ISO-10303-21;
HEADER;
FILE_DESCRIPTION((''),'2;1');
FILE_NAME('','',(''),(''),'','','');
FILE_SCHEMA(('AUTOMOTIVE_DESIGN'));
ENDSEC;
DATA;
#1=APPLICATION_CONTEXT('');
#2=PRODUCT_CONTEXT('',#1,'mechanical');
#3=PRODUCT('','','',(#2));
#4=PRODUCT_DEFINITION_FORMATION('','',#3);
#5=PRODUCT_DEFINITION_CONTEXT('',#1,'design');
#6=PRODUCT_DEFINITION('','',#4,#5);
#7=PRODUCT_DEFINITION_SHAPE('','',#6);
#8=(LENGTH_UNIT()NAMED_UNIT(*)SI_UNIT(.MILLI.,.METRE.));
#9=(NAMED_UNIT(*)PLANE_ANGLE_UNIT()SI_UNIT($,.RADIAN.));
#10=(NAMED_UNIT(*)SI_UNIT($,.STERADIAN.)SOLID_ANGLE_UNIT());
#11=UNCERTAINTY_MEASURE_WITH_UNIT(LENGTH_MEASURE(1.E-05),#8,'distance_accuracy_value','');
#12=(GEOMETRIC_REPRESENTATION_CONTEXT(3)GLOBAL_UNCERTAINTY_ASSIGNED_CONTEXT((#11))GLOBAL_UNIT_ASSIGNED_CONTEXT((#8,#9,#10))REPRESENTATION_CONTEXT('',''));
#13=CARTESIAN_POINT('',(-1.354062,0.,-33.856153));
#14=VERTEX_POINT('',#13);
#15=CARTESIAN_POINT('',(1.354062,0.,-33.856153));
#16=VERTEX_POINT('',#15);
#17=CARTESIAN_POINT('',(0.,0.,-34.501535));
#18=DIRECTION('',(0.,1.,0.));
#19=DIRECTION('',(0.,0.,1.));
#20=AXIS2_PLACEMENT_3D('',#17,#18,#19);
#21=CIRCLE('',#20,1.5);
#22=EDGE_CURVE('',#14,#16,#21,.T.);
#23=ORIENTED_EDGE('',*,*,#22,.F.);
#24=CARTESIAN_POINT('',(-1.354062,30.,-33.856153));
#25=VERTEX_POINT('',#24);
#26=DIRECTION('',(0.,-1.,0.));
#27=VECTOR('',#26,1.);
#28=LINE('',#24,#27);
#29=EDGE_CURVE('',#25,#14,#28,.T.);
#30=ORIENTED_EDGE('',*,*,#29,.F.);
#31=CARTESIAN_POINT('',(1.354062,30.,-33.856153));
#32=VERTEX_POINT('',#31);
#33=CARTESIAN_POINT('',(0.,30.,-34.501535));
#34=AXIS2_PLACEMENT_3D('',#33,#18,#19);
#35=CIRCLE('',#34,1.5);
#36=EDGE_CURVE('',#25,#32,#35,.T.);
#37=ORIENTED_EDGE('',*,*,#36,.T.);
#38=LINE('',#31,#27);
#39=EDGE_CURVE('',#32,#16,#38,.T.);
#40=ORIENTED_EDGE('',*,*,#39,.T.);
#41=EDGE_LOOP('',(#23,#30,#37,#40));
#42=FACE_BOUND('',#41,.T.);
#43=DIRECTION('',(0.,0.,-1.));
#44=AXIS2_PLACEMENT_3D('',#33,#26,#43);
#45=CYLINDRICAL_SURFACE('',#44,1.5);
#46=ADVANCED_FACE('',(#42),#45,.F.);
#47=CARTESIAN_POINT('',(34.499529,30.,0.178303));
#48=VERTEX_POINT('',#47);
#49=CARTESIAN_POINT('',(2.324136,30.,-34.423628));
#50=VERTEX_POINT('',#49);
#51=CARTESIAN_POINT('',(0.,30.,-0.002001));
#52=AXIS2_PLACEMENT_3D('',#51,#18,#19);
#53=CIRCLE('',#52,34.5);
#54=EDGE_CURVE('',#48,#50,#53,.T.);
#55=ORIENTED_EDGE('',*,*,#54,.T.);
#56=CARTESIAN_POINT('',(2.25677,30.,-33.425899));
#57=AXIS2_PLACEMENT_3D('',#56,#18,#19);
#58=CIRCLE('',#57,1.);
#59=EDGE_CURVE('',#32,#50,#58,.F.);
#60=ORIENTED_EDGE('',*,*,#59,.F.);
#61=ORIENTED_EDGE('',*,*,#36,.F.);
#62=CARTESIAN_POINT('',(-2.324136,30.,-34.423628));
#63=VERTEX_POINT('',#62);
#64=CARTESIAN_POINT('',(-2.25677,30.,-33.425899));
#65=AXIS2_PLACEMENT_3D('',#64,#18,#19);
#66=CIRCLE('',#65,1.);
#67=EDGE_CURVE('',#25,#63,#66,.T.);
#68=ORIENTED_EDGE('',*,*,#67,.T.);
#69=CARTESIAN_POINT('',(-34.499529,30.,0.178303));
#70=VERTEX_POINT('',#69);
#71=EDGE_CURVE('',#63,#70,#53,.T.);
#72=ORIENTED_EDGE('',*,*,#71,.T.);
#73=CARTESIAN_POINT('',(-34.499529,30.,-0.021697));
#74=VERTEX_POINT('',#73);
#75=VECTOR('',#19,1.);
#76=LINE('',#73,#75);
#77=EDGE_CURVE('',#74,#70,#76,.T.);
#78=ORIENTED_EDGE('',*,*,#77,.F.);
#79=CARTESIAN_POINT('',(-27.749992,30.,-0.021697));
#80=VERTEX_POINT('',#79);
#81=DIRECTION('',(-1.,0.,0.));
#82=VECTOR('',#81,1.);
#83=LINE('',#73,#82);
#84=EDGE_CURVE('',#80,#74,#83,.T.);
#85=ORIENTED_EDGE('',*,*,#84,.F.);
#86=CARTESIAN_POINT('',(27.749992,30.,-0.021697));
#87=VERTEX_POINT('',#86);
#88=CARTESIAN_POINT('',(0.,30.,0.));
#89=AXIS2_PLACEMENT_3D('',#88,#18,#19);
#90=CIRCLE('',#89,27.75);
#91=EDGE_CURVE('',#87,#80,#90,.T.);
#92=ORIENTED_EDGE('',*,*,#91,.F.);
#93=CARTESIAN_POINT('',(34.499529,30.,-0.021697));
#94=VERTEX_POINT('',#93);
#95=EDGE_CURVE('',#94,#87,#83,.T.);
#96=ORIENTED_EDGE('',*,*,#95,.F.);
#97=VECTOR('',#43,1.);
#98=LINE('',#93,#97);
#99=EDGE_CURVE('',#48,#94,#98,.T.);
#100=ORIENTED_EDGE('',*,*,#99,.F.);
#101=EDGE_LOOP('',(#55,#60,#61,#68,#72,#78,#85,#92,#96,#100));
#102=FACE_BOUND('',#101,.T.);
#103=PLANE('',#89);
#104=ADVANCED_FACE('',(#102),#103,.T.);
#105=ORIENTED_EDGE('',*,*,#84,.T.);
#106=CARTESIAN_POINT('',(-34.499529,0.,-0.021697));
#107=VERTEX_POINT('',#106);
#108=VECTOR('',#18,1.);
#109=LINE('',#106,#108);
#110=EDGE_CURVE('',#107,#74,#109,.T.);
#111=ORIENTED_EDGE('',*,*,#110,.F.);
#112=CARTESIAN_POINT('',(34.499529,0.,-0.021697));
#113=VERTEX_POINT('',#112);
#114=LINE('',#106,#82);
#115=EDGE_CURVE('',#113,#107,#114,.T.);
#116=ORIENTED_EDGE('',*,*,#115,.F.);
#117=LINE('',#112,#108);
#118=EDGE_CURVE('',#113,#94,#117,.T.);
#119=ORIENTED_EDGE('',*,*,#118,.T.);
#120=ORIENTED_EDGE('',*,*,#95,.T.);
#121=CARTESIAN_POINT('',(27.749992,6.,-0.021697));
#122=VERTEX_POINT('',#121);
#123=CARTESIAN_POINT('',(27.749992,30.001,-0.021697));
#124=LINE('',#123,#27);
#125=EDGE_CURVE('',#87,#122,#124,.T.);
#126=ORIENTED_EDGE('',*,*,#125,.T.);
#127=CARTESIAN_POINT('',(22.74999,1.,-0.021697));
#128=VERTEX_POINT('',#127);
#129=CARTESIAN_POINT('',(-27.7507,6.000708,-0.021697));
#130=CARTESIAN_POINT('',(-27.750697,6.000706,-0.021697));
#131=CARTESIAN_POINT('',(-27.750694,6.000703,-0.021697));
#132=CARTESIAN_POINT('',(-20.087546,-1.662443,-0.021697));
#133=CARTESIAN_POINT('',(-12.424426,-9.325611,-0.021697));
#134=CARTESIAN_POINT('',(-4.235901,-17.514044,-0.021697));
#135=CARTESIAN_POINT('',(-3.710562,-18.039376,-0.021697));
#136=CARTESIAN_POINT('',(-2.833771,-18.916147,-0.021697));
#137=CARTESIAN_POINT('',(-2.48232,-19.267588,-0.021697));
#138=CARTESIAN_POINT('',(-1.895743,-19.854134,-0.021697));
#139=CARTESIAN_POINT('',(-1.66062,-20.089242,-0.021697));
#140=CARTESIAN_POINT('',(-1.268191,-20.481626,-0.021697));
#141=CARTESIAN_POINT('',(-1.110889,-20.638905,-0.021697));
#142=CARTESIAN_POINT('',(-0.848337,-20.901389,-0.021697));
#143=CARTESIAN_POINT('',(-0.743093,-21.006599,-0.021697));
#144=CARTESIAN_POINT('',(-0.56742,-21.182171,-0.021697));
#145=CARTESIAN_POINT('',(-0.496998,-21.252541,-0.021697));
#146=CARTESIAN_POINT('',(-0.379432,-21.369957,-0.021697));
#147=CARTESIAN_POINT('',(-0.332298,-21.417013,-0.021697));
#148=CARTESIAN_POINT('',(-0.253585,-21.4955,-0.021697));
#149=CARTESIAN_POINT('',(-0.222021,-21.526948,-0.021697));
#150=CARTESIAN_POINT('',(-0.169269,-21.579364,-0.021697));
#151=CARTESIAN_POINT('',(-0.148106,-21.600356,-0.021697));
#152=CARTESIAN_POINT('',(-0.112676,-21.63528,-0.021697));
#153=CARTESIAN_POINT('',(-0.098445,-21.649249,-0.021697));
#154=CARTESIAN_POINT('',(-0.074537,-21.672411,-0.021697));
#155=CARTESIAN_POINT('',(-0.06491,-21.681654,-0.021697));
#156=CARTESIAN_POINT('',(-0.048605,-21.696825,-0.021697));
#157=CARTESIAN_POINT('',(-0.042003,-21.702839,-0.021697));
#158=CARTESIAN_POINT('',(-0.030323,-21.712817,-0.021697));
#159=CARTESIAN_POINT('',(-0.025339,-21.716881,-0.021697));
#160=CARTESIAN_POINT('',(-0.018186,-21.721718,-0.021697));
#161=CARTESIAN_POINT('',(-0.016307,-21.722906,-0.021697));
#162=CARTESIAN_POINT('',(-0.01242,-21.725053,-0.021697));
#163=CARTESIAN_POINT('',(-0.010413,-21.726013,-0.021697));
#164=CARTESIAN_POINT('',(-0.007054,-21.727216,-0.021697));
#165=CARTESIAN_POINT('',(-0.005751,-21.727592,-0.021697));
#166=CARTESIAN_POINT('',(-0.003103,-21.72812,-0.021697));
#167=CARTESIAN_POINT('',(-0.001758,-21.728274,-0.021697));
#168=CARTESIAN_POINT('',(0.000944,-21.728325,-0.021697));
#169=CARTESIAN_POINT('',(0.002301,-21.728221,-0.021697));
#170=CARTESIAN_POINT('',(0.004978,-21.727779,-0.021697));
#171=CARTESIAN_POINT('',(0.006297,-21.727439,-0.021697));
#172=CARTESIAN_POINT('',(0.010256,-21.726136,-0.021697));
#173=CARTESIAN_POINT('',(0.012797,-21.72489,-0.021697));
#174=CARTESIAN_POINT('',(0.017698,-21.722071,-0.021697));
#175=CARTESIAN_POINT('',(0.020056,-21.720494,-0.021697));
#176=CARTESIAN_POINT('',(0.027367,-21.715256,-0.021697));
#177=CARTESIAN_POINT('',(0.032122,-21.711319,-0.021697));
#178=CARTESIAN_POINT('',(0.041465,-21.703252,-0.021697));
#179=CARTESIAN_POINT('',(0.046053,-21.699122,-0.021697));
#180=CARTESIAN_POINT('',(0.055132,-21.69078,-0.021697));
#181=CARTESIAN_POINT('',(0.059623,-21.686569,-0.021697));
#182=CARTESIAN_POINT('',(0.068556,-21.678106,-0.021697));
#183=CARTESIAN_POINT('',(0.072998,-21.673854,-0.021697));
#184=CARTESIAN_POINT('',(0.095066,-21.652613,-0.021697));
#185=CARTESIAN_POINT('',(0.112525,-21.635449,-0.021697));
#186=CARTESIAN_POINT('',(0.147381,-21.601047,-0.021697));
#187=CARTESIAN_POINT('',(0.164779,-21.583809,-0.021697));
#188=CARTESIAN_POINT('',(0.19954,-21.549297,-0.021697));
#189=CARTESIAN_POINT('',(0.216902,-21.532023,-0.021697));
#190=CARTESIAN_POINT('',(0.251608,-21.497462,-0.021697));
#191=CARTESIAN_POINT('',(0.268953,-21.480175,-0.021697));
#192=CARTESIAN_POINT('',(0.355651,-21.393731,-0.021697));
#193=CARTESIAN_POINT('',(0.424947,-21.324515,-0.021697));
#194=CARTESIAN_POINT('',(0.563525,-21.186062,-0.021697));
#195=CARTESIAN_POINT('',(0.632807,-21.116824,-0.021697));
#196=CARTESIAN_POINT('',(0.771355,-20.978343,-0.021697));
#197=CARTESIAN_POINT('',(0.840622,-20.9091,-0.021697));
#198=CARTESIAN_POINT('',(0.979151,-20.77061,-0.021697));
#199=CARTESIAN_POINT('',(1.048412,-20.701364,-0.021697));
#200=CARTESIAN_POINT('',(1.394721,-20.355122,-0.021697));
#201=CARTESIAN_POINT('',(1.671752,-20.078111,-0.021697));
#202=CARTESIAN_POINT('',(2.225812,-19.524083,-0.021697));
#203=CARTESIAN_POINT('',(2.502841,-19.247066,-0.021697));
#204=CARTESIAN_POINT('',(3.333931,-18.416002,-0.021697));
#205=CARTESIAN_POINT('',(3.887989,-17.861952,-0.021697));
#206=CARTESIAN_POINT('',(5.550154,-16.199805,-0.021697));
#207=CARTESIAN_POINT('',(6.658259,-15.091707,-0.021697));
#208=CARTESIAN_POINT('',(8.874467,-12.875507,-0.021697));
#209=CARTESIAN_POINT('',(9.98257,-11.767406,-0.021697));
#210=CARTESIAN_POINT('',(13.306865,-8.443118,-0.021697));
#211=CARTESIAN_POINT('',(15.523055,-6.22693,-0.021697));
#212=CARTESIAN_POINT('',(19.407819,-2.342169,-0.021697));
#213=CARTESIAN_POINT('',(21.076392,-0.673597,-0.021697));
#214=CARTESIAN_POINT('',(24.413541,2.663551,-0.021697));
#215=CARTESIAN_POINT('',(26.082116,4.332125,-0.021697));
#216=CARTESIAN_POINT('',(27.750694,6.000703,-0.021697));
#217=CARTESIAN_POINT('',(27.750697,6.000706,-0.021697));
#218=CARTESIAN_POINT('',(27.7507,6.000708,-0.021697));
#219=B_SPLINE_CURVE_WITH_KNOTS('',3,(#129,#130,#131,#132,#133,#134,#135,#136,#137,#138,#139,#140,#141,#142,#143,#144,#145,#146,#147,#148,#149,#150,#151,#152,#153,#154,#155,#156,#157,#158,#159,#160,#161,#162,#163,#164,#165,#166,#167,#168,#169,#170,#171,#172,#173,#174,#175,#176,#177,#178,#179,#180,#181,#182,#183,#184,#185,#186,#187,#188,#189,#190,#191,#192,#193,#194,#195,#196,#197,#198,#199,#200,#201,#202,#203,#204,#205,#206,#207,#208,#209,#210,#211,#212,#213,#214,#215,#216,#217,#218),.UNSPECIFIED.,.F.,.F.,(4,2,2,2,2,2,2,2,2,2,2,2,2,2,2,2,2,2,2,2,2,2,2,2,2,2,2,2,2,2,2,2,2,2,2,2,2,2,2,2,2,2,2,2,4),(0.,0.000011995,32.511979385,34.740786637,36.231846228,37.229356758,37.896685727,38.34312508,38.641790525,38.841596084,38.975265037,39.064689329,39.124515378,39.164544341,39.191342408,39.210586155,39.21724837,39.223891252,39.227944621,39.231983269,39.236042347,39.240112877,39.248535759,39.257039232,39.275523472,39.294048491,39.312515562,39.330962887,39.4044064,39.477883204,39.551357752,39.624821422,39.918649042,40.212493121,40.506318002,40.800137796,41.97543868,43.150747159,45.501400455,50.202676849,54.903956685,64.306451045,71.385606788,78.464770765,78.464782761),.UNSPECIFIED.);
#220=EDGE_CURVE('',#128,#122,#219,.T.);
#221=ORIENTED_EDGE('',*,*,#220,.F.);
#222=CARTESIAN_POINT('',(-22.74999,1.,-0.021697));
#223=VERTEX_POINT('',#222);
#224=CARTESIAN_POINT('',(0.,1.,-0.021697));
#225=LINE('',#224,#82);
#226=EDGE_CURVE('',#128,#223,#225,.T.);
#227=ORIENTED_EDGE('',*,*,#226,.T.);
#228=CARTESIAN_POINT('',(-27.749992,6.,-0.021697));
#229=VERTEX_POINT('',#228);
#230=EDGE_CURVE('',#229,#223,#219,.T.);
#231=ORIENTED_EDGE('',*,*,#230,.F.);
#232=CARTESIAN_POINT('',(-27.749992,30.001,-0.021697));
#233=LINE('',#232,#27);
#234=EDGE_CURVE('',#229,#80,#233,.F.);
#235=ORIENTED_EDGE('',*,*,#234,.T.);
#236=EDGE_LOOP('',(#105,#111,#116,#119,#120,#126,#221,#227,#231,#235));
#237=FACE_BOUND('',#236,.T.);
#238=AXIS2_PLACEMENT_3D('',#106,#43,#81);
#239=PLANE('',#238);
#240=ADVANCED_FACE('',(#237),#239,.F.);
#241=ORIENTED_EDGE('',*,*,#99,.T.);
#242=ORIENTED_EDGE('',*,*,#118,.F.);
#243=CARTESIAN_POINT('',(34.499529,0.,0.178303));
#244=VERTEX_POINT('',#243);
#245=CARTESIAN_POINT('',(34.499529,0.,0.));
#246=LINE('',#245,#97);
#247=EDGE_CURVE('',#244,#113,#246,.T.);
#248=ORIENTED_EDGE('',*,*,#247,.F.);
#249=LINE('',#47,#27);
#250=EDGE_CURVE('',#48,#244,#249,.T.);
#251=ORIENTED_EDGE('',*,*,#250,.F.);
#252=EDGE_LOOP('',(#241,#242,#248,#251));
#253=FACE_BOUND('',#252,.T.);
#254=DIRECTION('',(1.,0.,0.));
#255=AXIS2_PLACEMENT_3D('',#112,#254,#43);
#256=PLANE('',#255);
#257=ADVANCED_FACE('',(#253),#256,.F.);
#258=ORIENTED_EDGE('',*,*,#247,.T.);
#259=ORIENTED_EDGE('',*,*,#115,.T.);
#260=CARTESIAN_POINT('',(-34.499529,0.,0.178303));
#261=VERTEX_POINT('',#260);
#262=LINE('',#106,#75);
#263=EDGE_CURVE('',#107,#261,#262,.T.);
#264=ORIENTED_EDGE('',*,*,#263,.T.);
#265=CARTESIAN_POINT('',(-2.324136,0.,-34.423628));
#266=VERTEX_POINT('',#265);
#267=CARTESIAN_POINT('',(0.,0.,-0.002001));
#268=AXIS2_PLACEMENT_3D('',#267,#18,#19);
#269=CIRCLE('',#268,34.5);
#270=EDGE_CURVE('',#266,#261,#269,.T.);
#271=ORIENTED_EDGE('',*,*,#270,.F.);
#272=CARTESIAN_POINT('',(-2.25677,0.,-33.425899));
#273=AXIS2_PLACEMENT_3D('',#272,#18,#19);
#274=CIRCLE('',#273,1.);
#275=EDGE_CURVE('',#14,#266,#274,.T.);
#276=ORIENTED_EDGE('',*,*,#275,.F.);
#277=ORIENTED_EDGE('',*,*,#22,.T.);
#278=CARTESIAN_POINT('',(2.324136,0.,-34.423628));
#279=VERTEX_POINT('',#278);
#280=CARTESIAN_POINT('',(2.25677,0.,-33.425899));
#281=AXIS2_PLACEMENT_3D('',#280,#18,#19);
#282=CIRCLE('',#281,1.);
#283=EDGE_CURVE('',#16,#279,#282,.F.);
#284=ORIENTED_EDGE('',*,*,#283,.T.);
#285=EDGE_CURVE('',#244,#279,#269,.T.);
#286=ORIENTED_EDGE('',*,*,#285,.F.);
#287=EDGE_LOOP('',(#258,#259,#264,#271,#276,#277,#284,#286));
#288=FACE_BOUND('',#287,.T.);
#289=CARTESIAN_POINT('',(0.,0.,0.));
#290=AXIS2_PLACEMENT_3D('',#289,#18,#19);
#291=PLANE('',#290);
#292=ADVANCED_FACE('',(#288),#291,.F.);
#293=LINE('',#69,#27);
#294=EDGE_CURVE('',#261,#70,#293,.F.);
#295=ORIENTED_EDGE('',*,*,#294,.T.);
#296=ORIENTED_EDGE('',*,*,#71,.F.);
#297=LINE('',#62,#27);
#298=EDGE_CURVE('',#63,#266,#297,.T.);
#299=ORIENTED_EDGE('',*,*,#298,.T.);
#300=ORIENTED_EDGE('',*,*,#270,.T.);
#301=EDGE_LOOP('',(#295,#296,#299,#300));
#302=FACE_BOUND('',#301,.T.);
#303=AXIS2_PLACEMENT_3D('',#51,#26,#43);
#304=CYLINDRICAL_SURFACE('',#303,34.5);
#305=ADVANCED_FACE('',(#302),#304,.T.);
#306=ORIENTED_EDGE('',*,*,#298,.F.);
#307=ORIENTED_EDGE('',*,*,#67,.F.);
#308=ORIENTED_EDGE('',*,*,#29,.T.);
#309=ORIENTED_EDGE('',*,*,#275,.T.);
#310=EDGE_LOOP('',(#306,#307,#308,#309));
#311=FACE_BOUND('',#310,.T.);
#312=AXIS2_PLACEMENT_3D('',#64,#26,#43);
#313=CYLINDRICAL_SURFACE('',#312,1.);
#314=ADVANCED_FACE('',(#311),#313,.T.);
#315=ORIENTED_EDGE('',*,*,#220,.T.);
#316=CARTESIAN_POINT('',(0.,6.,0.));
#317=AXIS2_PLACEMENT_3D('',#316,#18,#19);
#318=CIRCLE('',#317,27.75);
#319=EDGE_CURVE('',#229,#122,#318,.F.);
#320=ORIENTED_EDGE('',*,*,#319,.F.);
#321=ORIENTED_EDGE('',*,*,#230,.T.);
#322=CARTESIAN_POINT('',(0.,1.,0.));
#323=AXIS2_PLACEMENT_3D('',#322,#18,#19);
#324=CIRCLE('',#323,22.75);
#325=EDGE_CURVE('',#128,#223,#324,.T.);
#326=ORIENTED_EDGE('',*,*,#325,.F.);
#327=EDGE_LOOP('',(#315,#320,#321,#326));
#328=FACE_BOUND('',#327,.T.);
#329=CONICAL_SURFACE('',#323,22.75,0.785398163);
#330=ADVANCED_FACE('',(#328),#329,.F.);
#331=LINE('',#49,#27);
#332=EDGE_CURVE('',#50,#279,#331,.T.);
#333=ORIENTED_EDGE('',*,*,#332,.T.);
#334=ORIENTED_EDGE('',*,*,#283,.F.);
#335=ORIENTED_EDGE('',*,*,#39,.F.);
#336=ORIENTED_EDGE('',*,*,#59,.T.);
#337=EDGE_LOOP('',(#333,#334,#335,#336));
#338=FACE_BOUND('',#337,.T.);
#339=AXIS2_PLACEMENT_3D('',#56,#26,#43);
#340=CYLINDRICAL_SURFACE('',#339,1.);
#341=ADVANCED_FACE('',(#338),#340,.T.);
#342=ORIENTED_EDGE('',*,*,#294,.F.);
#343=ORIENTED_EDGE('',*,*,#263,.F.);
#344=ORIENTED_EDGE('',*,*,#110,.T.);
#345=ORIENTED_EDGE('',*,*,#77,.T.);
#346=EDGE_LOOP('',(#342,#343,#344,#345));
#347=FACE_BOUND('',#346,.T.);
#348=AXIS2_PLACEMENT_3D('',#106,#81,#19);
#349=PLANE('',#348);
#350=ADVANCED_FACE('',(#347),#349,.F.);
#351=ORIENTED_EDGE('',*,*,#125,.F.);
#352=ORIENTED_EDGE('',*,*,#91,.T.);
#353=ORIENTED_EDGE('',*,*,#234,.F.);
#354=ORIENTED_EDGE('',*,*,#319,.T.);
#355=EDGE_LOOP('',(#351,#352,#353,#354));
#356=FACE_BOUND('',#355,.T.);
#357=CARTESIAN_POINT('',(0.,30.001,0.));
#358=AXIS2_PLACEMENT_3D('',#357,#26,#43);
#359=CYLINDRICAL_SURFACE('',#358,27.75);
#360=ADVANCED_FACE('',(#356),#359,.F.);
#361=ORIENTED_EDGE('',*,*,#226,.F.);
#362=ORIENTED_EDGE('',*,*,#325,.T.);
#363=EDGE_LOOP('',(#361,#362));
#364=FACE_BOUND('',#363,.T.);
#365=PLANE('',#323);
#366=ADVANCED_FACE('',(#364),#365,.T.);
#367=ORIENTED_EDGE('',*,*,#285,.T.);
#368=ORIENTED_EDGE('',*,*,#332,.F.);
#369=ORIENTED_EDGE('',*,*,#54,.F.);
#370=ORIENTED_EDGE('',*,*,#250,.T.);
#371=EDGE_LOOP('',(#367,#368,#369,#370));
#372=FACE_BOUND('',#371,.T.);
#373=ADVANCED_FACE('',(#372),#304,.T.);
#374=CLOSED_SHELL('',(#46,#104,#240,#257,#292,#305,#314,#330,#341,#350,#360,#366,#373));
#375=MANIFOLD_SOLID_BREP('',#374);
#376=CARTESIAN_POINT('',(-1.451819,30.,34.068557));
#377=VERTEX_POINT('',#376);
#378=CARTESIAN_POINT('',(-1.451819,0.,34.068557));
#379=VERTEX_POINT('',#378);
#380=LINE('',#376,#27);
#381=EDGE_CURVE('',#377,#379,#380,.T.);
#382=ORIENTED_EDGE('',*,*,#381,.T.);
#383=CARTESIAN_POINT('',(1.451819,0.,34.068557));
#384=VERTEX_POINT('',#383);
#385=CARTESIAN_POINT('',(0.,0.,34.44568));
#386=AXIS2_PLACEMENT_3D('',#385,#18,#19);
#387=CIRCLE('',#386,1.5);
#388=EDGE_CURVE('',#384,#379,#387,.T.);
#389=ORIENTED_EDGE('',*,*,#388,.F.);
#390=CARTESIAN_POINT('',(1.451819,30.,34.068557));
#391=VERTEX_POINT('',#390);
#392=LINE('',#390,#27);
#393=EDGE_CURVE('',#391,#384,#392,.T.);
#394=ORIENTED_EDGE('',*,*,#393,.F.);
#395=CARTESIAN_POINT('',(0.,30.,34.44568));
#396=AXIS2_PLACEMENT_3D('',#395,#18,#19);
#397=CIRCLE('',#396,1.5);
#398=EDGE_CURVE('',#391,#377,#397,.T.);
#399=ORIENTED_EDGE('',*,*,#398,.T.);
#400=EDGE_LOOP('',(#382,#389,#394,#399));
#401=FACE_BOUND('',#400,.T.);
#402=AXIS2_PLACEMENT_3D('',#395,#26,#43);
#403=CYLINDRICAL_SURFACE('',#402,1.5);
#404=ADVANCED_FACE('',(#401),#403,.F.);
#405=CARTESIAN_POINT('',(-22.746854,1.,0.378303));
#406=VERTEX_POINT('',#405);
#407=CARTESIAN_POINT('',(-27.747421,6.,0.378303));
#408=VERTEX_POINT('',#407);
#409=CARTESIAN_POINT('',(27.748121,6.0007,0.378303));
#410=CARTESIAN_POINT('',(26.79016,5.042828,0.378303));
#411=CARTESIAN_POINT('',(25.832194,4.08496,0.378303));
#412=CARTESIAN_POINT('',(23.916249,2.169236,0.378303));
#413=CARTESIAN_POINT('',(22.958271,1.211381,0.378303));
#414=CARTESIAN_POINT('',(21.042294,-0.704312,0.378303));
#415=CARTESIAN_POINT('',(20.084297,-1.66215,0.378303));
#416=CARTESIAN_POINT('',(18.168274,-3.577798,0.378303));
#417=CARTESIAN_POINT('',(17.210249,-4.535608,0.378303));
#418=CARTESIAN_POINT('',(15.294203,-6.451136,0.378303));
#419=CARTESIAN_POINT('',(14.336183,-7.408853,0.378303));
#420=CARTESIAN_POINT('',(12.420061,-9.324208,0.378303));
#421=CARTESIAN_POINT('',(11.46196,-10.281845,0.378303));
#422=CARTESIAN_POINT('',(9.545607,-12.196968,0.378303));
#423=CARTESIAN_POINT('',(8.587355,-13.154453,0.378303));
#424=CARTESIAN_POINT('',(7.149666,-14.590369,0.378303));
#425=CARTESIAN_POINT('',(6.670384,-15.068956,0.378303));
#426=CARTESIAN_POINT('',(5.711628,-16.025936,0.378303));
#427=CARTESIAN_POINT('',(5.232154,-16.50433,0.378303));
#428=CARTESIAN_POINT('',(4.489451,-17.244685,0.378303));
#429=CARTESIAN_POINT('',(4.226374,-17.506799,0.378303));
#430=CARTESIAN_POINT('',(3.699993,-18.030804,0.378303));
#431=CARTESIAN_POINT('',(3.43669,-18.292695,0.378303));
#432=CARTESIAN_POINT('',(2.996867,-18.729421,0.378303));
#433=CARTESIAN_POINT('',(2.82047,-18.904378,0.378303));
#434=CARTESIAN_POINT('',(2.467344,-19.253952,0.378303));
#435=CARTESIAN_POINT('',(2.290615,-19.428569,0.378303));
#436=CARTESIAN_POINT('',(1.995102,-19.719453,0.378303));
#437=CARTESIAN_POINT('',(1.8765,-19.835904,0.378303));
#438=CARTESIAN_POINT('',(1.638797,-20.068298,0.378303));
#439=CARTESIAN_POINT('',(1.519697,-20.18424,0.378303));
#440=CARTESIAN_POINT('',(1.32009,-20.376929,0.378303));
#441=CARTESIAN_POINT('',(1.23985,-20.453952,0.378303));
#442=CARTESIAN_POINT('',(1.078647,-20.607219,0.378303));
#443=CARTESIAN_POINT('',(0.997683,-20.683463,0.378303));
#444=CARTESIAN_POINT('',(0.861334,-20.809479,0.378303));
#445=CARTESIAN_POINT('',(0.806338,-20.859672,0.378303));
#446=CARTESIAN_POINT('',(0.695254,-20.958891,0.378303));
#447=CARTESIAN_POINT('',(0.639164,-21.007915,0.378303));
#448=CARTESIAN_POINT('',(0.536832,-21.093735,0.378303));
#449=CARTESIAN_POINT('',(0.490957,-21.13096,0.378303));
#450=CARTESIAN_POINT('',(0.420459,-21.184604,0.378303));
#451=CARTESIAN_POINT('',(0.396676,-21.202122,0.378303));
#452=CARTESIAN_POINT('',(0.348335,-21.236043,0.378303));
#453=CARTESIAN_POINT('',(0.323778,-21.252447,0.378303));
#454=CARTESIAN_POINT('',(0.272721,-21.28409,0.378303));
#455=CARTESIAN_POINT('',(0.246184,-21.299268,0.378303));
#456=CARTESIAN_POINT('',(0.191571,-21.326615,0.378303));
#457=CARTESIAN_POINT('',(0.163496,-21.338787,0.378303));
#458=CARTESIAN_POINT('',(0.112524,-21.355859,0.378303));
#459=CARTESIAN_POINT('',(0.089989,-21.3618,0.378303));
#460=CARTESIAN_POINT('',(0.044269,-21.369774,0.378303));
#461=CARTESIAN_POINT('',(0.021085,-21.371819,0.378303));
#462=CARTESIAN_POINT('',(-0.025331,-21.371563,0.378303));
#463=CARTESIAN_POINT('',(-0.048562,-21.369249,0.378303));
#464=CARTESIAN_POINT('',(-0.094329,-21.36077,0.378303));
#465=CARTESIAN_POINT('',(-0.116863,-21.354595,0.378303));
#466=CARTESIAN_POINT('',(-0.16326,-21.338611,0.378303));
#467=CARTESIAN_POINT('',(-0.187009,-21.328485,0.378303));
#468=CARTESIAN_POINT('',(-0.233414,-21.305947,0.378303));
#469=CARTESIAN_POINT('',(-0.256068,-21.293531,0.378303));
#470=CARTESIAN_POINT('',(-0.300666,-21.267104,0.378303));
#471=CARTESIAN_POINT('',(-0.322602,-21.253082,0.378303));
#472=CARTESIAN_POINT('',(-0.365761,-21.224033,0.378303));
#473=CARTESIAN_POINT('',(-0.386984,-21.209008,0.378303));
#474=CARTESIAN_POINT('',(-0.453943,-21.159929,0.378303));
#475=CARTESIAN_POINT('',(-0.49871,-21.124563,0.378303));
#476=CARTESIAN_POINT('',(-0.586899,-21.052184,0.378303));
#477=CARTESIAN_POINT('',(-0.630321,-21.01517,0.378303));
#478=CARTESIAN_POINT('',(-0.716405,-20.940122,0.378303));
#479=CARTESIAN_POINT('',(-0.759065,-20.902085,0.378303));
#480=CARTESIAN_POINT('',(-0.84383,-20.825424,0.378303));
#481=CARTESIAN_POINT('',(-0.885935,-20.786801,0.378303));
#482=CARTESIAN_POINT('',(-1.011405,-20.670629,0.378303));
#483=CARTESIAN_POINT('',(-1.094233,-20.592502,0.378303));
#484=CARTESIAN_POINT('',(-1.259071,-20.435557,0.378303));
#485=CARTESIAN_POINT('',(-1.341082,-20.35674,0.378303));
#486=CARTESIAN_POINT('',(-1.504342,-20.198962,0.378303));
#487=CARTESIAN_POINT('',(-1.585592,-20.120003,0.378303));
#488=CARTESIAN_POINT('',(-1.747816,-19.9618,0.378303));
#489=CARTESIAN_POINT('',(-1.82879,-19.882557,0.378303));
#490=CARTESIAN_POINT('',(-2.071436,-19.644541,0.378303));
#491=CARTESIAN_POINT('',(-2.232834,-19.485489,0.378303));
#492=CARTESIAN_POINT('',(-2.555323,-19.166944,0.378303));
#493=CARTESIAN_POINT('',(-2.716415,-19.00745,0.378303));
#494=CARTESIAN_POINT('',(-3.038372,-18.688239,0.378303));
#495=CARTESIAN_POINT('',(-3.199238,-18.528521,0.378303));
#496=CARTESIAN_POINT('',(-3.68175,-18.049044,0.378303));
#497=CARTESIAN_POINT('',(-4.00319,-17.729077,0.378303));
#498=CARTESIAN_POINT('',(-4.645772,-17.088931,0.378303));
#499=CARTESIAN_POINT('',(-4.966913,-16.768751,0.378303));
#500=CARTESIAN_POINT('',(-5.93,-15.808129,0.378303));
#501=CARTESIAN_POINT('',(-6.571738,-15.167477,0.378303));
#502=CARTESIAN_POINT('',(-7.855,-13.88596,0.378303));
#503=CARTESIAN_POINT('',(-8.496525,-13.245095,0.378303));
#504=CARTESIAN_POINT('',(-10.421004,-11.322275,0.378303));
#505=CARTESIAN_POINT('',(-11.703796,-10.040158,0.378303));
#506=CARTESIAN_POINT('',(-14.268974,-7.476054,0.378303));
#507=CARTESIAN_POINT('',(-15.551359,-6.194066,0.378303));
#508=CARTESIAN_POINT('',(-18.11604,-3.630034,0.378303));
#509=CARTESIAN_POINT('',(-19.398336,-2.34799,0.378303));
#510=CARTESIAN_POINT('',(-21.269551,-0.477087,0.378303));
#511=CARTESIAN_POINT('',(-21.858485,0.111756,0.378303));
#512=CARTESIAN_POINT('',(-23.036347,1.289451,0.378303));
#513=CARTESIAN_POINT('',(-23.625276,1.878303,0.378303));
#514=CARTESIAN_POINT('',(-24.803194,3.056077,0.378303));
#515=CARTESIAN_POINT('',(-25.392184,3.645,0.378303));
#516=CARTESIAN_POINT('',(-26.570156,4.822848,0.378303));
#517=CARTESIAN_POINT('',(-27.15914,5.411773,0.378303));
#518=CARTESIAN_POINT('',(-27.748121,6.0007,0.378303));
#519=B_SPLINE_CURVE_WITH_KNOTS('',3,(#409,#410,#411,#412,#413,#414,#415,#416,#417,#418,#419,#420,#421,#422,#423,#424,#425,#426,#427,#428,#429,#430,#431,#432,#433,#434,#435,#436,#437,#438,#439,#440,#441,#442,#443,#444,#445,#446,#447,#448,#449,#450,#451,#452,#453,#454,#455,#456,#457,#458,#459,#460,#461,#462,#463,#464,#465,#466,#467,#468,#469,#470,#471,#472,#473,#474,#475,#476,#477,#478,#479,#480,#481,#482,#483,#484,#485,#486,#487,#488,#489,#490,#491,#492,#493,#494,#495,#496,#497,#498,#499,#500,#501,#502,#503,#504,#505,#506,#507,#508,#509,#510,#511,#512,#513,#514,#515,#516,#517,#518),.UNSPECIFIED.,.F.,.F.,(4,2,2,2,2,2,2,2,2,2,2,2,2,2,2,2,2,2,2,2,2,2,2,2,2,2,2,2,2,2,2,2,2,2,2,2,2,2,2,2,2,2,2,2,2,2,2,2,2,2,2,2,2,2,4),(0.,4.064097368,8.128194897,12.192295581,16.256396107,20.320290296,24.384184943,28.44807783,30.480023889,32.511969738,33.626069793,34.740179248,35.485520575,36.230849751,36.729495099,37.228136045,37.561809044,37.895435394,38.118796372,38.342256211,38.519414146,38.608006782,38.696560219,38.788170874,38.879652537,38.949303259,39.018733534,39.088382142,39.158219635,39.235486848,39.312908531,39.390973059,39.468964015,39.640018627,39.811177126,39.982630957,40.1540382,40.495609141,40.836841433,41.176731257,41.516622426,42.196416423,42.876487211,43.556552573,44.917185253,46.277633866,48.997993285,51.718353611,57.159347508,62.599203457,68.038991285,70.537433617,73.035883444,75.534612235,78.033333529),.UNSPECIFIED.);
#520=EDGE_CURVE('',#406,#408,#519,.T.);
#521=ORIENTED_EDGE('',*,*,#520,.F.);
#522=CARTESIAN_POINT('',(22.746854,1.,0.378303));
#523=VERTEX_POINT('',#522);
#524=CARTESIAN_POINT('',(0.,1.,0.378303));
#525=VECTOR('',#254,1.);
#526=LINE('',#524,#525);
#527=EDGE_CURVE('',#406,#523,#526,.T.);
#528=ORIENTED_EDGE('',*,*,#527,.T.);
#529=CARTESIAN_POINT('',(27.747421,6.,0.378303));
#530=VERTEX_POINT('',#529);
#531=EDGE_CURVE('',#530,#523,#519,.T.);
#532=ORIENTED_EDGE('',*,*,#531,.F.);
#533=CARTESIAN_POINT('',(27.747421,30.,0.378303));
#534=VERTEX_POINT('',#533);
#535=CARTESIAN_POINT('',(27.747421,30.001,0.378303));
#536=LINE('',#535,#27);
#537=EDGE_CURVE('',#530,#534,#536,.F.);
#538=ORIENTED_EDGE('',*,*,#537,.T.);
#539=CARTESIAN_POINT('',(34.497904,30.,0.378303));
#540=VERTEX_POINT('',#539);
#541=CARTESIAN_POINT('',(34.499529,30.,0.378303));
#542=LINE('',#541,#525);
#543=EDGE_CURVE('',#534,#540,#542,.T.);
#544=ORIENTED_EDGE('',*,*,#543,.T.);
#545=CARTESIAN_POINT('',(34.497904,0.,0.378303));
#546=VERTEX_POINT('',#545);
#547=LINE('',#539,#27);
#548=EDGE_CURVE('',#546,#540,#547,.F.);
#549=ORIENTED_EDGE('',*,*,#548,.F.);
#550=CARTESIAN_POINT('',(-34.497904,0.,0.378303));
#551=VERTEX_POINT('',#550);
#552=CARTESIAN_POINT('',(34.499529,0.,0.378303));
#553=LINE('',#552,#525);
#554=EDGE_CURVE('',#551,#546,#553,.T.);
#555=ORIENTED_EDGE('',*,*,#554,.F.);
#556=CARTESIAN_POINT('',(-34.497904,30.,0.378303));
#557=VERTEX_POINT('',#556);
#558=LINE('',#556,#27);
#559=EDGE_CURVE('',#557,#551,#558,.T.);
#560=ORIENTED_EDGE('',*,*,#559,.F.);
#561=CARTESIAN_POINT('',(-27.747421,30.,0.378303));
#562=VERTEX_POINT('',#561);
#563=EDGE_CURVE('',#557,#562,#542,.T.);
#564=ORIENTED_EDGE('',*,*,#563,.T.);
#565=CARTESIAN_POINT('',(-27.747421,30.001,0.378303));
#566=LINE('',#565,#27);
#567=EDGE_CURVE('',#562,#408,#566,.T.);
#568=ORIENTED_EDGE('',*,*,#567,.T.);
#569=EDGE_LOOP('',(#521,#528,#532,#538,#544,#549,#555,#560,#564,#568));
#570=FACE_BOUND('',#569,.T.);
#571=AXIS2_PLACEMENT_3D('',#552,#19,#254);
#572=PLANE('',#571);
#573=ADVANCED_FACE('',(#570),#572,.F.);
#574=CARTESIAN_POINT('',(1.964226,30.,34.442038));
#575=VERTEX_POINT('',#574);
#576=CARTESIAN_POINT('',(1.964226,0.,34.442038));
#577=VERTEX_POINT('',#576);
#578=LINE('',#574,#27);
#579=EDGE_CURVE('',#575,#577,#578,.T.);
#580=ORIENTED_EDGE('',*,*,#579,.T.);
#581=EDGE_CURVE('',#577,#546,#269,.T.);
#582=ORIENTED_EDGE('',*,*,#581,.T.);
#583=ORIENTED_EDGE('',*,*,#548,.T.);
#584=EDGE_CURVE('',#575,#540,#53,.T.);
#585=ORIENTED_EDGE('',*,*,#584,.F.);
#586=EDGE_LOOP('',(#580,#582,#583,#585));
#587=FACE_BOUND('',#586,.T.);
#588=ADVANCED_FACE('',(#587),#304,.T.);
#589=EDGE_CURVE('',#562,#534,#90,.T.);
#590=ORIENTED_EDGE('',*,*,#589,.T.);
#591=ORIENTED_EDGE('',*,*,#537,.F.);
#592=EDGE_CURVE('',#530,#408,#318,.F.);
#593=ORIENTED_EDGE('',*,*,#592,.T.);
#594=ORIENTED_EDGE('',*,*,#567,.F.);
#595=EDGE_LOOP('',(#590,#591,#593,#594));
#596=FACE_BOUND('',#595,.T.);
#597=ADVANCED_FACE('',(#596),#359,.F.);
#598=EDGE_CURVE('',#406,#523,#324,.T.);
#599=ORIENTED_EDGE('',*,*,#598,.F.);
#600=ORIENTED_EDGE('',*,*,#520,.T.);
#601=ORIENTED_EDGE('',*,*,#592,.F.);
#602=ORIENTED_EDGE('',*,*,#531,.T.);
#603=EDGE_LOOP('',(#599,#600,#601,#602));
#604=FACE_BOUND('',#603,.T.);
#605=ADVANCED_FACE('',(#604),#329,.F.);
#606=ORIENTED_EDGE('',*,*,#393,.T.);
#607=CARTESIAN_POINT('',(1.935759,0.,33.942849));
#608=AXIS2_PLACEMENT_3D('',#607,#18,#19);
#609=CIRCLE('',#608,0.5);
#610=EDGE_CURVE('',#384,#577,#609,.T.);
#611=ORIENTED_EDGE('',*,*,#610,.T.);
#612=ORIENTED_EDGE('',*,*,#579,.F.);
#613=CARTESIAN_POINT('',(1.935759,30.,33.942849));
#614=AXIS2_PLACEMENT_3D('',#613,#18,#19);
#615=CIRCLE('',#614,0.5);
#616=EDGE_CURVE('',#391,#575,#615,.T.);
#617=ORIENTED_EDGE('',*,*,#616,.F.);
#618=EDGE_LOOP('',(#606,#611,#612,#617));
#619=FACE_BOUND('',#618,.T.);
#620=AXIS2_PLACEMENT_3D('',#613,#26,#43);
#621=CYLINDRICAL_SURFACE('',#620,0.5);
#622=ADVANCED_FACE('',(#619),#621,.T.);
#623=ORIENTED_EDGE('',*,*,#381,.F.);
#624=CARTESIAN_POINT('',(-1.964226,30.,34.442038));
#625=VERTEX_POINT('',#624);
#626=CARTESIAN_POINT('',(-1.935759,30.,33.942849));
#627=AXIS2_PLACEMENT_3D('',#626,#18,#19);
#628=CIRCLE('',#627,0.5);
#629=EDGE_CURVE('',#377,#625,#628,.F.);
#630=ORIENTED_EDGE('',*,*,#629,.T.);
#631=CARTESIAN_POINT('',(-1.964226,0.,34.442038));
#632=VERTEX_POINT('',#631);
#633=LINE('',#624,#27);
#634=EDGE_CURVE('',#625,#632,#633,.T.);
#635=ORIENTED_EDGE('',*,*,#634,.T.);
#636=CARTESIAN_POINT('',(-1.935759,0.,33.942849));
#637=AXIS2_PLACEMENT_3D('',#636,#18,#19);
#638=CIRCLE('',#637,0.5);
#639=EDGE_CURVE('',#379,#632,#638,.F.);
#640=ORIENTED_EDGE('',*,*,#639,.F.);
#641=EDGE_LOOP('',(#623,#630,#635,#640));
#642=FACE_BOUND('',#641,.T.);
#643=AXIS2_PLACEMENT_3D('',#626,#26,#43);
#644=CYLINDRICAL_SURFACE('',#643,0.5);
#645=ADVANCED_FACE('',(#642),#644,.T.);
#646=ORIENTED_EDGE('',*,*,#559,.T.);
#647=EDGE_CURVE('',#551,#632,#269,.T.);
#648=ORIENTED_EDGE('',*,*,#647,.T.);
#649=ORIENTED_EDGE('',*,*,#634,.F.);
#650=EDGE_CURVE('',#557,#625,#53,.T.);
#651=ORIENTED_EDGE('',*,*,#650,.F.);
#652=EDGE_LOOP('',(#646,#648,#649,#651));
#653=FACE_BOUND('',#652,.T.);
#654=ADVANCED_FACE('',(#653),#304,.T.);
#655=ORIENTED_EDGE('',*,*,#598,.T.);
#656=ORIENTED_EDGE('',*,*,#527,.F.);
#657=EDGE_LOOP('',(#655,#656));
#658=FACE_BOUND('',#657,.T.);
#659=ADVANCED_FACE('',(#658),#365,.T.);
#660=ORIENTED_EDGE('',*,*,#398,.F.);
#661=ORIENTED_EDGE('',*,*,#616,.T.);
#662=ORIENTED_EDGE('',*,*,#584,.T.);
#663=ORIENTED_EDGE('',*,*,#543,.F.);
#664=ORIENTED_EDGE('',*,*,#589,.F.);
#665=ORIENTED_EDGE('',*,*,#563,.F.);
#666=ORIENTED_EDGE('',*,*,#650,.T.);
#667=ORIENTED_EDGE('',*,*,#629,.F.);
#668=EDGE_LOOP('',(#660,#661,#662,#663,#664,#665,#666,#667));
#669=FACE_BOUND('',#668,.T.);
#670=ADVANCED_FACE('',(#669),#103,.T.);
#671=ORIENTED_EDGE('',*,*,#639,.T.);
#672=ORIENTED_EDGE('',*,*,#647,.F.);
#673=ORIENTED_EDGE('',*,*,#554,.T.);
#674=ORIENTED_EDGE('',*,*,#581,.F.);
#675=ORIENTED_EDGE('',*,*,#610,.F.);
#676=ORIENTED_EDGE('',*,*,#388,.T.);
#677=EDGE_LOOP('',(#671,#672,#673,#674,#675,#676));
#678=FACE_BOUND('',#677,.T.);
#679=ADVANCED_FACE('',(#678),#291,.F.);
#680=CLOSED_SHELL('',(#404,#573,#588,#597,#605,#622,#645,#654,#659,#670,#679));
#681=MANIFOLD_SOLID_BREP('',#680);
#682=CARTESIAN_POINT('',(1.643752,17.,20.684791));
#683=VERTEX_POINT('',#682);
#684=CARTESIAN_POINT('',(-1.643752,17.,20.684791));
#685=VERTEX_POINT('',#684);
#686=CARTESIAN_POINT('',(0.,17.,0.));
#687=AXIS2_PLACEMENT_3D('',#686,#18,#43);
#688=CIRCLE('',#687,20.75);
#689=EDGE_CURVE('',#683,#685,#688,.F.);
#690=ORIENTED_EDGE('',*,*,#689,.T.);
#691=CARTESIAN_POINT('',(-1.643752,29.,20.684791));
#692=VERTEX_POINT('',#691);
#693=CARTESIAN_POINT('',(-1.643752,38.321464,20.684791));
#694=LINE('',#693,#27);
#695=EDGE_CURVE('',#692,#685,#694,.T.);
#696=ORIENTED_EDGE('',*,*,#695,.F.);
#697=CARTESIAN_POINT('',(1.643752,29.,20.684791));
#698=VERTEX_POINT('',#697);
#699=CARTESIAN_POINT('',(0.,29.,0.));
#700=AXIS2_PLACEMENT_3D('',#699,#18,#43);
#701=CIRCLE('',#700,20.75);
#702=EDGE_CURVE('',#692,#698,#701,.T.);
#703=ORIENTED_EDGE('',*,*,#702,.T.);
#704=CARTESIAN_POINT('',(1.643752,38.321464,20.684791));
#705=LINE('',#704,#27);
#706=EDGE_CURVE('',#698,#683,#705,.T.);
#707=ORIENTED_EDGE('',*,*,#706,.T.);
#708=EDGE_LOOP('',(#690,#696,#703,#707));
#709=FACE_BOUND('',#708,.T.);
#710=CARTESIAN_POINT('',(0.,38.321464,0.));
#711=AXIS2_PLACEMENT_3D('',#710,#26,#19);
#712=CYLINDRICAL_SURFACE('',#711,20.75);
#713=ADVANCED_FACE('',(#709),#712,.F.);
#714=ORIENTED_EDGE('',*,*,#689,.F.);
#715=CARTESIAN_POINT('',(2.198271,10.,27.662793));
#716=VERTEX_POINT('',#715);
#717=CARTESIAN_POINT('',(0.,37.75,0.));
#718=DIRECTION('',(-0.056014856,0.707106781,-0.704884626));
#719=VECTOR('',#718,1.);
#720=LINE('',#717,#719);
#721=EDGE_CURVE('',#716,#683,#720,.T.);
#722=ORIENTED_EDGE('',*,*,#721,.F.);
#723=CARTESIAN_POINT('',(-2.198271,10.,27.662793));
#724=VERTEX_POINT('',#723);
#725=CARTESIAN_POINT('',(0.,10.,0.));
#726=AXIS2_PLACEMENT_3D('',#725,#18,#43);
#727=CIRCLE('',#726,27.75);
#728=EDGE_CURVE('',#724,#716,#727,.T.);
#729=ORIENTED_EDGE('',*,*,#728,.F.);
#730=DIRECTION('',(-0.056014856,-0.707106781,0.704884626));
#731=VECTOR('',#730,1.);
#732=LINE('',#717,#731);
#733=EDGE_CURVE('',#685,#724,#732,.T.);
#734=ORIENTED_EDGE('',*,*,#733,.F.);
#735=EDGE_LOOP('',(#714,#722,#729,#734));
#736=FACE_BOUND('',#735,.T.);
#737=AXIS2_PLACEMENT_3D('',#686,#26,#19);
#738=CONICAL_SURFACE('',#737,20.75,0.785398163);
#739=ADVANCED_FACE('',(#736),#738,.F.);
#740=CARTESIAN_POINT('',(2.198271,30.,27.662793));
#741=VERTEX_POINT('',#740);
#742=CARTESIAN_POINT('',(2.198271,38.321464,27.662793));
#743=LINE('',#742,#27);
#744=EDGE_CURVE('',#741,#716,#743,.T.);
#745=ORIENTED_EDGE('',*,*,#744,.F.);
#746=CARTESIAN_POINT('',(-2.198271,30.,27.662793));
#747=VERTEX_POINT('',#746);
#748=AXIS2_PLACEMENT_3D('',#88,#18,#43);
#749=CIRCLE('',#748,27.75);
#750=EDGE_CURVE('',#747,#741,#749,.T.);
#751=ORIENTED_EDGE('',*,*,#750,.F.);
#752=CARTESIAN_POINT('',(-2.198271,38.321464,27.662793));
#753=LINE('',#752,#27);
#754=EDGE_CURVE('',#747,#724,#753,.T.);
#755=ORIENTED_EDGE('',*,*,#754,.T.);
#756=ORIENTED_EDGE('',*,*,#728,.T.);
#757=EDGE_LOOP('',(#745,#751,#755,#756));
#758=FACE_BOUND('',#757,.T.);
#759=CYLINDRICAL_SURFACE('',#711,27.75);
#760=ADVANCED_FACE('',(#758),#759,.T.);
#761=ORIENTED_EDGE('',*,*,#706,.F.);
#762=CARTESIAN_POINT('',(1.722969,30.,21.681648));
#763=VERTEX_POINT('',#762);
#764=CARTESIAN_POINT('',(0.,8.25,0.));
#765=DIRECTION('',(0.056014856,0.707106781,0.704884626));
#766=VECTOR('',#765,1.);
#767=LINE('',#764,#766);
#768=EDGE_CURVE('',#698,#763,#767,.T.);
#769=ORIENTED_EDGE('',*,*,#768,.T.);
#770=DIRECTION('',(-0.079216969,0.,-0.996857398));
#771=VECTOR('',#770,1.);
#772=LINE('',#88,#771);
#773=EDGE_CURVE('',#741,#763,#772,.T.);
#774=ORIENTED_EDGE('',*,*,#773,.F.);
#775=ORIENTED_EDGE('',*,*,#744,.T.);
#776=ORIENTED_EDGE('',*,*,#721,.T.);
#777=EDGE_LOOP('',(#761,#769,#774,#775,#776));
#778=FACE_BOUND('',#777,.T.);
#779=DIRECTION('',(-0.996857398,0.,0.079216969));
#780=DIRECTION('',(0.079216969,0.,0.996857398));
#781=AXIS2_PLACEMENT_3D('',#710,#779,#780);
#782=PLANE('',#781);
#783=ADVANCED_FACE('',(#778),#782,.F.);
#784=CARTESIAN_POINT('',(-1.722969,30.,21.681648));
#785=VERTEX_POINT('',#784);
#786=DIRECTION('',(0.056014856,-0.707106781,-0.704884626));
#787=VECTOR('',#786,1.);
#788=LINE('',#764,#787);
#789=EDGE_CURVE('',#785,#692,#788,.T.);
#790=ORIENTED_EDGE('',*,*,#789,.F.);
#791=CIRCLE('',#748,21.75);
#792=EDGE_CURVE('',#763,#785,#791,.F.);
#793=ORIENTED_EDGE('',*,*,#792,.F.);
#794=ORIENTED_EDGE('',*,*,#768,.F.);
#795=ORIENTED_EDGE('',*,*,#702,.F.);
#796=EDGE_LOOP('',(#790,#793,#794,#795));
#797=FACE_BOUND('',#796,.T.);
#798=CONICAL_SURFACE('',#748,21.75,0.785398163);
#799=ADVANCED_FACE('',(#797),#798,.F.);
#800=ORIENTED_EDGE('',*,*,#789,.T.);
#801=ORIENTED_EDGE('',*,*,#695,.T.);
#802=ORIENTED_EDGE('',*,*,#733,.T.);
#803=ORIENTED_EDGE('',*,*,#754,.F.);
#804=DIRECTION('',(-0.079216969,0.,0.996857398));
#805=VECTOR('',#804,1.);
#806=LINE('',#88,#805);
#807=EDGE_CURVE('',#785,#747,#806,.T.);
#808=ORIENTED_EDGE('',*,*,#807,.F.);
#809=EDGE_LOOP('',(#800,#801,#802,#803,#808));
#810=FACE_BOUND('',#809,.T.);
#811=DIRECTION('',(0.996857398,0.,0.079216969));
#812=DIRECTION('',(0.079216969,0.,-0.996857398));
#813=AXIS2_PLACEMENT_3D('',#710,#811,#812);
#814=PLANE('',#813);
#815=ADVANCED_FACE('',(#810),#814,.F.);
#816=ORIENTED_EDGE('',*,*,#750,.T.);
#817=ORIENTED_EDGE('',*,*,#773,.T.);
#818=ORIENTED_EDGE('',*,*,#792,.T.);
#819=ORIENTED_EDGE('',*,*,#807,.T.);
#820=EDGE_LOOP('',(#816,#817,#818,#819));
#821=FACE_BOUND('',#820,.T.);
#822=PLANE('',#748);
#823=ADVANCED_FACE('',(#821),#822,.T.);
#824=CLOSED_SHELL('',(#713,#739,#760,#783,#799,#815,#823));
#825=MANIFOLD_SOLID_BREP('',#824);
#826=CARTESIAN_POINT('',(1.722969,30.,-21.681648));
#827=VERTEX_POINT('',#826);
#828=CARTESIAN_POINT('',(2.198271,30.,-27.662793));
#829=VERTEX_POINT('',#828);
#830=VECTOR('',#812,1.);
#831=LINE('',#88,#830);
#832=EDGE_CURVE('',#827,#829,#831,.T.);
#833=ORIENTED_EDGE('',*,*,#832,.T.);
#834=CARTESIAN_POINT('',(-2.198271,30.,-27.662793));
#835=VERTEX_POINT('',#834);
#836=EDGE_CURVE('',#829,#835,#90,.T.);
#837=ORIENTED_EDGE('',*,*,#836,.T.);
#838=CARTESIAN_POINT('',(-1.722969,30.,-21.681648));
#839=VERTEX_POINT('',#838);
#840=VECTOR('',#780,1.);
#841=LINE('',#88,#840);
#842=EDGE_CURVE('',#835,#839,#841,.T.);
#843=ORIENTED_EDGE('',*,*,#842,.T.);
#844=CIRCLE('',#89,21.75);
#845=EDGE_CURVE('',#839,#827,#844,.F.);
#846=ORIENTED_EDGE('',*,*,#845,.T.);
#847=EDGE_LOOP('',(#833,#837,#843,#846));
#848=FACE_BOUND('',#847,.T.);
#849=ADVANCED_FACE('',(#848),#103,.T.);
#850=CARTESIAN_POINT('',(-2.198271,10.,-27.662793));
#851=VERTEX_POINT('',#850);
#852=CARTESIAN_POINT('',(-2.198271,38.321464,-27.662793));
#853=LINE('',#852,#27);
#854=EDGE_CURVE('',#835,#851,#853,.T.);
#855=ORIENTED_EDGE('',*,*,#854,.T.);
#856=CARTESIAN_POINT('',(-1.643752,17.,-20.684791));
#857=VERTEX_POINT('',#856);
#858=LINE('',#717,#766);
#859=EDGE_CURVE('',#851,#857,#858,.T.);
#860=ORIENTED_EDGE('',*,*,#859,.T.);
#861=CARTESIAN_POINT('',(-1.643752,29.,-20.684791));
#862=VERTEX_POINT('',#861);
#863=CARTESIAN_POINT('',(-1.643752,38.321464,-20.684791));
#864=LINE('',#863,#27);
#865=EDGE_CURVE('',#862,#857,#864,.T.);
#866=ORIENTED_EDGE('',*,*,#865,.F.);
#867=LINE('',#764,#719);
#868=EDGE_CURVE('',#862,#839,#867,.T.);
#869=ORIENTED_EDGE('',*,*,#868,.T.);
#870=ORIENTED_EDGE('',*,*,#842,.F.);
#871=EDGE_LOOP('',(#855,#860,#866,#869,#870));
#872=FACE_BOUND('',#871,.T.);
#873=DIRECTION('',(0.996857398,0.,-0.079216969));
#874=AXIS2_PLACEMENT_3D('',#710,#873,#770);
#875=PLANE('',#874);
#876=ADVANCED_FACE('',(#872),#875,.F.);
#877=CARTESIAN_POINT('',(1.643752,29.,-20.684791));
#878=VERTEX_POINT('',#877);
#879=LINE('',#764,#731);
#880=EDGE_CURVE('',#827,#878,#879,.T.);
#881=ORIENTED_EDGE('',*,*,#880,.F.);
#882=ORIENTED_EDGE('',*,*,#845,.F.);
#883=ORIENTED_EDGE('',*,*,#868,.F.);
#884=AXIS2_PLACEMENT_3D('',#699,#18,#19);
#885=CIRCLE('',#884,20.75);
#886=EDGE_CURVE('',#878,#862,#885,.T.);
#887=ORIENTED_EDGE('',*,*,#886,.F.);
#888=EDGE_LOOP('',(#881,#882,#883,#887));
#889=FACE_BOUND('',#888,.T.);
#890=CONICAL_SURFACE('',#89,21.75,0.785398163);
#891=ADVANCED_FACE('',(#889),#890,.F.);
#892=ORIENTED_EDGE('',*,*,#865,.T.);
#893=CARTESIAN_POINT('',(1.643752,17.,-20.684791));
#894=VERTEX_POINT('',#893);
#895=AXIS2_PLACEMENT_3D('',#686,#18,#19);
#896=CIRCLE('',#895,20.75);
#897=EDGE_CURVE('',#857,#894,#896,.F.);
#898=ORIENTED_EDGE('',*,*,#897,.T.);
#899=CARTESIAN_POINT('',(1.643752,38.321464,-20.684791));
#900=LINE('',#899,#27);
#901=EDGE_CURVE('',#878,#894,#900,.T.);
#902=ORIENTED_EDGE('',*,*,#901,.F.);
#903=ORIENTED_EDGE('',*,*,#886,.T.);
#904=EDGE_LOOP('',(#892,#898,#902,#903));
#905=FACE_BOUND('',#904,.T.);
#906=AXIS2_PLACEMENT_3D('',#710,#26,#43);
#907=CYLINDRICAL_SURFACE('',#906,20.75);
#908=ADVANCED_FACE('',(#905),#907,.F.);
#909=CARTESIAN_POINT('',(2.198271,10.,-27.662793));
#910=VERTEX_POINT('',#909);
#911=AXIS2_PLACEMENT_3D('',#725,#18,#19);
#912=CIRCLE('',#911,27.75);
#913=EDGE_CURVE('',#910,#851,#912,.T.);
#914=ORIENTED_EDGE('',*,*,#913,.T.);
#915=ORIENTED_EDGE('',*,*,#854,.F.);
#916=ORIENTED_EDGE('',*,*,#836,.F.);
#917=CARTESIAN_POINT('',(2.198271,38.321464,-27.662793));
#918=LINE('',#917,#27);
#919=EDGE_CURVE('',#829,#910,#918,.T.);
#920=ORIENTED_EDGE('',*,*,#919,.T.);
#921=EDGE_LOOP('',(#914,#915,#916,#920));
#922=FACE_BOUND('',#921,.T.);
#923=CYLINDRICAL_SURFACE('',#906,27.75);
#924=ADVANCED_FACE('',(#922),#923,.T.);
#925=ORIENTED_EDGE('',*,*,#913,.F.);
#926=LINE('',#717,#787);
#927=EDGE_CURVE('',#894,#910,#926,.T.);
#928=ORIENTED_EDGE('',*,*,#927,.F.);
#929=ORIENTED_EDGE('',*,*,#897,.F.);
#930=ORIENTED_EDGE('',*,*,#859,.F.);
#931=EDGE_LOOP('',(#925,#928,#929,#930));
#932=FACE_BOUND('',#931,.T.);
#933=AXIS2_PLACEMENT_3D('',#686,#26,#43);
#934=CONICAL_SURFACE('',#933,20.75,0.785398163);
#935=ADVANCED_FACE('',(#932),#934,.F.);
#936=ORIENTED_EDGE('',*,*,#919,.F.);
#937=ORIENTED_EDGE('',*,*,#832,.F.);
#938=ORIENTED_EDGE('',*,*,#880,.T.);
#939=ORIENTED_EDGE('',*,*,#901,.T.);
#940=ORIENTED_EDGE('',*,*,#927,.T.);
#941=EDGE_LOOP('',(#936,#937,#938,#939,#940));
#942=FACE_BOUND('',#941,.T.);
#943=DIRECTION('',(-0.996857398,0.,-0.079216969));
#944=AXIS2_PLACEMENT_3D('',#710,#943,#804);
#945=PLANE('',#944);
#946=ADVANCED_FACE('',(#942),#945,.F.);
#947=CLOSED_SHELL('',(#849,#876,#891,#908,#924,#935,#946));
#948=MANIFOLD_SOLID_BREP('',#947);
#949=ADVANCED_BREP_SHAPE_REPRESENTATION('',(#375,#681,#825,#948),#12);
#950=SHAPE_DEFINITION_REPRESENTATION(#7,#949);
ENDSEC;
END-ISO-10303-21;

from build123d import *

# Parameters (mm, degrees)
BOSS_EXTRUDE1_DEPTH = 30
CUT_EXTRUDE2_REACH  = 60.241
CUT_EXTRUDE2_START  = 1
SKETCH2_R           = 27.75
BOSS_EXTRUDE2_START = 10
BOSS_EXTRUDE2_DEPTH = 20
CHAMFER2_SIZE       = 1
CHAMFER3_SIZE       = 7
CIRPATTERN2_COUNT   = 2
FILLET2_SIZE        = 5
SKETCH14_W          = 68.999057692
SKETCH14_H          = 0.4
CUT_EXTRUDE4_DEPTH  = 58.241242639


with BuildPart() as part:
    # Sketch1 → Boss-Extrude1 (new body)
    with BuildSketch(Plane(origin=(0, 0, 0), x_dir=(1, 0, 0), z_dir=(0, 1, 0))):
        with BuildLine():
            ThreePointArc((1.451818925, -34.068556857), (1.641248992, -34.346908706), (1.964225605, -34.442038138))
            ThreePointArc((1.964225605, -34.442038138), (34.499528846, -0.178302888), (2.324135821, 34.423627607))
            ThreePointArc((2.324135821, 34.423627607), (1.751838249, 34.289058819), (1.354061739, 33.856153382))
            ThreePointArc((1.354061739, 33.856153382), (0, 33.001534515), (-1.354061739, 33.856153382))
            ThreePointArc((-1.354061739, 33.856153382), (-1.751838249, 34.289058819), (-2.324135821, 34.423627607))
            ThreePointArc((-2.324135821, 34.423627607), (-34.499528846, -0.178302888), (-1.964225605, -34.442038138))
            ThreePointArc((-1.964225605, -34.442038138), (-1.641248992, -34.346908706), (-1.451818925, -34.068556857))
            ThreePointArc((-1.451818925, -34.068556857), (0, -32.945679925), (1.451818925, -34.068556857))
        make_face()
    extrude(amount=BOSS_EXTRUDE1_DEPTH)

    # Sketch2 → Cut-Extrude2 (cut, up to next)
    with BuildSketch(Plane(origin=(0, 0, 0), x_dir=(1, 0, 0), z_dir=(0, 1, 0)).offset(CUT_EXTRUDE2_START), mode=Mode.PRIVATE) as cut_extrude2_sk1:
        with Locations(Location((0, 0, 0), (0, 0, 270))):
            Circle(SKETCH2_R)
    cut_extrude2_tool1 = extrude(cut_extrude2_sk1.sketch, amount=CUT_EXTRUDE2_REACH, mode=Mode.PRIVATE) & part.part
    add(cut_extrude2_tool1.solids().sort_by_distance((0, 1, 0))[0], mode=Mode.SUBTRACT)

    # Fillet2
    fillet2_edges = [part.edges().sort_by_distance(p)[0] for p in [
        (0, 1, -27.75),
    ]]
    chamfer(fillet2_edges, length=FILLET2_SIZE)

    # Sketch14 → Cut-Extrude4 (cut, through all)
    with BuildSketch(Plane(origin=(0, 30, 0), x_dir=(1, 0, 0), z_dir=(0, 1, 0))):
        with Locations((0, -0.178302888)):
            Rectangle(SKETCH14_W, SKETCH14_H)
    extrude(amount=-CUT_EXTRUDE4_DEPTH, mode=Mode.SUBTRACT)


with BuildPart() as body_2:
    # Sketch2<2> → Boss-Extrude2 (new body)
    with BuildSketch(Plane(origin=(0, 0, 0), x_dir=(1, 0, 0), z_dir=(0, 1, 0)).offset(BOSS_EXTRUDE2_START)):
        with BuildLine():
            ThreePointArc((2.198270889, 27.662792793), (0, 27.75), (-2.198270889, 27.662792793))
            Line((-2.198270889, 27.662792793), (-1.643752106, 20.684791007))
            ThreePointArc((-1.643752106, 20.684791007), (0, 20.75), (1.643752106, 20.684791007))
            Line((1.643752106, 20.684791007), (2.198270889, 27.662792793))
        make_face()
    extrude(amount=BOSS_EXTRUDE2_DEPTH)

    # Chamfer2
    chamfer2_edges = [body_2.edges().sort_by_distance(p)[0] for p in [
        (0, 30, -20.75),
    ]]
    chamfer(chamfer2_edges, length=CHAMFER2_SIZE)

    # Chamfer3
    chamfer3_edges = [body_2.edges().sort_by_distance(p)[0] for p in [
        (0, 10, -20.75),
    ]]
    chamfer(chamfer3_edges, length=CHAMFER3_SIZE - 0.0001)  # a hair under: the kernel refuses the full size


with BuildPart() as cirpattern2_1:
    # CirPattern2: pattern copy
    add(body_2.part.rotate(Axis((0, 0, 0), (0, 1, 0)), 1 * 360 / CIRPATTERN2_COUNT))


with BuildPart() as cut_extrude4_piece_1:
    # of the separate pieces the step leaves, piece 1, a body of its own (cut_extrude4_pieces)
    add(part.part.solids().sort_by_distance((27.749991518, 6, -0.021697112))[0])


with BuildPart() as cut_extrude4_piece_2:
    # of the separate pieces the step leaves, piece 2, a body of its own (cut_extrude4_pieces)
    add(part.part.solids().sort_by_distance((27.747421266, 6, 0.378302888))[0])


solid = Compound([body_2.part, cirpattern2_1.part, cut_extrude4_piece_1.part, cut_extrude4_piece_2.part])
